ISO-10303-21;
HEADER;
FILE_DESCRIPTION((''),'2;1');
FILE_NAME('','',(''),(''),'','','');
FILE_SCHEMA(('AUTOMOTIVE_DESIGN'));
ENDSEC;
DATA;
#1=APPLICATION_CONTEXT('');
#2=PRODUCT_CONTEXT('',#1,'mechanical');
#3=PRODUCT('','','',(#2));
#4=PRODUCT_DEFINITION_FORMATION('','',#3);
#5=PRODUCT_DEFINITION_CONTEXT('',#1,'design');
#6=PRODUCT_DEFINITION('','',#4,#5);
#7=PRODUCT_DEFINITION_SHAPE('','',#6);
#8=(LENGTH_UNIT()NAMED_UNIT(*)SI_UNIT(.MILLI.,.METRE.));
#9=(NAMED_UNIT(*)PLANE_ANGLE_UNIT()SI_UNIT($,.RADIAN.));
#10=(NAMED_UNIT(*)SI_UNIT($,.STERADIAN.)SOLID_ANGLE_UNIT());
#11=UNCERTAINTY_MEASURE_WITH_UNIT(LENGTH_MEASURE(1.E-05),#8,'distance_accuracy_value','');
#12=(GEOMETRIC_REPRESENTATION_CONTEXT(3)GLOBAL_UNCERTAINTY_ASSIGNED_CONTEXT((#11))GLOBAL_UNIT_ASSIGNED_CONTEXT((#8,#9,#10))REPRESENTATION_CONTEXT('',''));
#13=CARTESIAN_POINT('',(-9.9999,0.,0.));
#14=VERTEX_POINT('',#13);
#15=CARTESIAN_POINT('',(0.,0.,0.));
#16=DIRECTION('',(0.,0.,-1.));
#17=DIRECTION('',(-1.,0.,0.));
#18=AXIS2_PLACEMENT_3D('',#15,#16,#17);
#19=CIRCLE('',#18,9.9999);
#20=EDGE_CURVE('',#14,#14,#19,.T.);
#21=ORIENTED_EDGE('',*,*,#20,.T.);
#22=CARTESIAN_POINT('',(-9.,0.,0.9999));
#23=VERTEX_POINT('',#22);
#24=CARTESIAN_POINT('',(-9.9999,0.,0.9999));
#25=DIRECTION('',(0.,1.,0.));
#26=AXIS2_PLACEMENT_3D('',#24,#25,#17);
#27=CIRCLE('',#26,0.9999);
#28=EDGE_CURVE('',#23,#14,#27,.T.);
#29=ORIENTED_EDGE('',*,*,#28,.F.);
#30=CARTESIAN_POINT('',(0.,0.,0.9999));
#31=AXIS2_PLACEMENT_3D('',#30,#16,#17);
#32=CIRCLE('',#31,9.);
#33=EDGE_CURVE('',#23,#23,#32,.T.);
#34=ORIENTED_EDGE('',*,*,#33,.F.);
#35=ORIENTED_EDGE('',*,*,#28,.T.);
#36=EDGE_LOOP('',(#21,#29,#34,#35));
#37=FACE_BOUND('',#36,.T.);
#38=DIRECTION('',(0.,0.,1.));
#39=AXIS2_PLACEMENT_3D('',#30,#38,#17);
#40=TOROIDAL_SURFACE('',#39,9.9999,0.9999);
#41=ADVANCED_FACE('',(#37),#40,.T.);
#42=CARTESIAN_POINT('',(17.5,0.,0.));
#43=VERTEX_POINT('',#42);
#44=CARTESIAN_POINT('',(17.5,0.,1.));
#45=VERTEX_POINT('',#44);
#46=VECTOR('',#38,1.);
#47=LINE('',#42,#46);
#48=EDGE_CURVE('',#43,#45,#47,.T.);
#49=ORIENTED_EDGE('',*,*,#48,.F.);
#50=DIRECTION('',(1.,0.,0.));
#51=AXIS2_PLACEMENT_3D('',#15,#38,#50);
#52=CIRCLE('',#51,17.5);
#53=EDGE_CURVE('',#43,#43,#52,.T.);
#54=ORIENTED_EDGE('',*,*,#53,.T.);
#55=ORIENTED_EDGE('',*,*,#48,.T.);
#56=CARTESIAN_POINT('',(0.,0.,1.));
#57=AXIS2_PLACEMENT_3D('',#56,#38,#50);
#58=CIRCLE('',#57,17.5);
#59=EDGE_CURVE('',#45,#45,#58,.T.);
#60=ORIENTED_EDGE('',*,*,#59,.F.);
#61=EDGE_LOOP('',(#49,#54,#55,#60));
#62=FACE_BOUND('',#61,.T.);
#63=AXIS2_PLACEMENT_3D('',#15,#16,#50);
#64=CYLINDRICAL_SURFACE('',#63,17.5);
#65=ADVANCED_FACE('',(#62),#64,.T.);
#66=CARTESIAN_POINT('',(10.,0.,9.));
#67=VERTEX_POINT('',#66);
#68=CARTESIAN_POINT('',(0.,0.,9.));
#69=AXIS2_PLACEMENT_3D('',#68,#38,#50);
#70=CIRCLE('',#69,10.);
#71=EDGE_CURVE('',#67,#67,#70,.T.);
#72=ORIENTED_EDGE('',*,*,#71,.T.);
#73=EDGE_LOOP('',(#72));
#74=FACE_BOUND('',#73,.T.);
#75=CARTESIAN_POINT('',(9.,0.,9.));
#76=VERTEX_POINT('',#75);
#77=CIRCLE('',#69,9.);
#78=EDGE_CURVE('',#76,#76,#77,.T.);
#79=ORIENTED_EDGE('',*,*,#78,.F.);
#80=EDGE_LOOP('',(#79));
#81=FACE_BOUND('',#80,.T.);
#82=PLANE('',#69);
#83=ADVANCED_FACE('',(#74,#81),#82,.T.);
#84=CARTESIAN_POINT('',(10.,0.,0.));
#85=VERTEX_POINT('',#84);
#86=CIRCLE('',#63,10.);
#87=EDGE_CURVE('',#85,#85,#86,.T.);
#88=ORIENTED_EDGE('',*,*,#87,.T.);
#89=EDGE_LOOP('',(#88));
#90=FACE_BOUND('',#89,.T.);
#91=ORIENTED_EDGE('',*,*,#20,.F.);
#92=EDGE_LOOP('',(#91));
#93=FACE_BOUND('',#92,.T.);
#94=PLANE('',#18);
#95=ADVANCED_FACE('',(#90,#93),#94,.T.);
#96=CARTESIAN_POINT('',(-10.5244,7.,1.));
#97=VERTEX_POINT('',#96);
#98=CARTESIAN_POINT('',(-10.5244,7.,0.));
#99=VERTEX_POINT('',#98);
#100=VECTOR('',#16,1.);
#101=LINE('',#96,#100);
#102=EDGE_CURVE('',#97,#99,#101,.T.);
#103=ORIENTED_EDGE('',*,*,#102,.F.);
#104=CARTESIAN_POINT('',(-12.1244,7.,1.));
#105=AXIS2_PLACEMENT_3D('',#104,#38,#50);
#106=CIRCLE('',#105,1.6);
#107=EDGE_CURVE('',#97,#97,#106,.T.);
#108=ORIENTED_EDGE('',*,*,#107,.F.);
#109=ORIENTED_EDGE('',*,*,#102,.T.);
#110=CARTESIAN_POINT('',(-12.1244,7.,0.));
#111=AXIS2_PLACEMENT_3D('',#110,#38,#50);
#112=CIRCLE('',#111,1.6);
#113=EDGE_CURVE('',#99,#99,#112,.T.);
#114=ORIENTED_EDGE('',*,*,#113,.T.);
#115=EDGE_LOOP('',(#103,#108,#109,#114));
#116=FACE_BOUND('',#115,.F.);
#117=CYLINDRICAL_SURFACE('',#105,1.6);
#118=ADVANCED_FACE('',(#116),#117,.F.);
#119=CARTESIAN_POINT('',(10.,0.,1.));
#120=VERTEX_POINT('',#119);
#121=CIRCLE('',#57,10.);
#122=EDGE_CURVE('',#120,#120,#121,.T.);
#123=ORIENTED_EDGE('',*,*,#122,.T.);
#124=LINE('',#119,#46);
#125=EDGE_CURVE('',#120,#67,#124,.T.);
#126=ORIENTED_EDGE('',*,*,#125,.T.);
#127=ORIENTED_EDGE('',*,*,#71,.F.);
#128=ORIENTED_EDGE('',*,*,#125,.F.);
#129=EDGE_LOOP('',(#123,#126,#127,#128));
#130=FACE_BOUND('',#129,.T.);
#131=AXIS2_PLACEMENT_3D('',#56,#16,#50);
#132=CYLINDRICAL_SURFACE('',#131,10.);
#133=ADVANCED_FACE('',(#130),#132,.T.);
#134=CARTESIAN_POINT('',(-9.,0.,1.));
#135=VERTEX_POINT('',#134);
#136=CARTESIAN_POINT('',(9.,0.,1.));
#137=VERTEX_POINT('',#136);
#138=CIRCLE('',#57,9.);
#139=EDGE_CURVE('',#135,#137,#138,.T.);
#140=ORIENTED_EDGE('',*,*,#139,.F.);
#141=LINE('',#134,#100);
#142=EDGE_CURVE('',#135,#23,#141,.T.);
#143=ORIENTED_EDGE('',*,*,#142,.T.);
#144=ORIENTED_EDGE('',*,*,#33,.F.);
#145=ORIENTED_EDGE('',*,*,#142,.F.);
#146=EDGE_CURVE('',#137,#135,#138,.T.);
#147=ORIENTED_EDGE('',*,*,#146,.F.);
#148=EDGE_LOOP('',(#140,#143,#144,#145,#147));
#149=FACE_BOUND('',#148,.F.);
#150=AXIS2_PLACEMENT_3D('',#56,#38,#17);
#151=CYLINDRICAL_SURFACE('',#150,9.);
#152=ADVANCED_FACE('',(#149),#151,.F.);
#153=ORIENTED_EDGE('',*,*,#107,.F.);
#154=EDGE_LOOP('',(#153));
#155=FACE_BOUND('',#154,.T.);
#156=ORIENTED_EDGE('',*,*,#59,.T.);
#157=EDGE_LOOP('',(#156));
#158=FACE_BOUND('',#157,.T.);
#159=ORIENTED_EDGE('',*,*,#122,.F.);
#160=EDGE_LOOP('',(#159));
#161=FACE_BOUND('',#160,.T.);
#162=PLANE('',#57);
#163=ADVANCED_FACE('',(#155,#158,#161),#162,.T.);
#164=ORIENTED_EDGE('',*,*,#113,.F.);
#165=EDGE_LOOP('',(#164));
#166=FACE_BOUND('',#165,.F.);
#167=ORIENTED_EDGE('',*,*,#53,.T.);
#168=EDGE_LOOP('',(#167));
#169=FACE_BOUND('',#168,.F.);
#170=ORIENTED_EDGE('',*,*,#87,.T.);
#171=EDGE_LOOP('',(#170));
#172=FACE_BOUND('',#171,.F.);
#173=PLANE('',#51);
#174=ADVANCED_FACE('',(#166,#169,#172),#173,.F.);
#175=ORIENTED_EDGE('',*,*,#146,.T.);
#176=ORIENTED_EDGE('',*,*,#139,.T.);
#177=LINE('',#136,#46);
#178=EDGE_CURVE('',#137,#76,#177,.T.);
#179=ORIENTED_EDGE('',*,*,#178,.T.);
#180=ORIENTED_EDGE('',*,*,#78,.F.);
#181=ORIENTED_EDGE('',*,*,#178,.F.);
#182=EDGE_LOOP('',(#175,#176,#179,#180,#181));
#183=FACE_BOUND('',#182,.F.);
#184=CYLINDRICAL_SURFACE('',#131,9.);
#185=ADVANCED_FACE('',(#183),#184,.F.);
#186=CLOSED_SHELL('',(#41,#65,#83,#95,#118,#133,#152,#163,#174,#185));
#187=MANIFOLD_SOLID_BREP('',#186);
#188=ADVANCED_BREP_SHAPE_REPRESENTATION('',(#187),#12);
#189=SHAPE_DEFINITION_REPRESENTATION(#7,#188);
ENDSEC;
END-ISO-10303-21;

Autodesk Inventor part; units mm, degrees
ref_plane "YZ Plane" through (0, 0, 0) normal (1, 0, 0) x (0, 1, 0)
ref_plane "XZ Plane" through (0, 0, 0) normal (0, 1, 0) x (-1, 0, 0)
ref_plane "XY Plane" through (0, 0, 0) normal (0, 0, 1) x (1, 0, 0)
sketch "Sketch1" plane through (0, 0, 0) normal (0, 0, 1) x (1, 0, 0)
  circle A0 centre (0, 0) radius 10
  circle A1 centre (0, 0) radius 17.5
  dimension "d0" = 35
  dimension "d1" = 20
extrude "Extrusion1" add sketch "Sketch1" along normal blind 1
sketch "Sketch2" plane through (0, 0, 1) normal (0, 0, 1) x (1, 0, 0)
  circle A0 centre (-12.1244, 7) radius 1.6
  circle A1 centre (0, 0) radius 10 projected
  circle A2 centre (0, 0) radius 17.5 projected
  line L0 (0, 0) -> (-10, 0) construction
  line L1 (-15.1554, 8.75) -> (-8.6603, 5) construction
  circle A3 centre (0, 0) radius 14 construction
  point P0 (-11.9078, 6.875)
  dimension "d16" = 28
  dimension "d4" = 3.2
  dimension "d8" = 30
extrude "Extrusion2" cut sketch "Sketch2" against normal through all contours A0
sketch "Sketch3" plane through (0, 0, 1) normal (0, 0, 1) x (1, 0, 0)
  circle A0 centre (0, 0) radius 9
  circle A1 centre (0, 0) radius 10
  circle A2 centre (0, 0) radius 10 projected
  dimension "d10" = 1
  dimension "d11" = 20
extrude "Extrusion3" add sketch "Sketch3" along normal blind 8
sketch "Sketch4" plane through (0, 0, 1) normal (0, 0, -1) x (-1, 0, 0)
  circle A0 centre (0, 0) radius 9 projected
  circle A1 centre (0, 0) radius 10 projected
extrude "Extrusion4" add sketch "Sketch4" along normal up to surface (1 mm away)
fillet "Fillet1" radius 1 1 edges at (9, 0, 0)
properties part number "Pre-Anode" material "Stainless Steel"
